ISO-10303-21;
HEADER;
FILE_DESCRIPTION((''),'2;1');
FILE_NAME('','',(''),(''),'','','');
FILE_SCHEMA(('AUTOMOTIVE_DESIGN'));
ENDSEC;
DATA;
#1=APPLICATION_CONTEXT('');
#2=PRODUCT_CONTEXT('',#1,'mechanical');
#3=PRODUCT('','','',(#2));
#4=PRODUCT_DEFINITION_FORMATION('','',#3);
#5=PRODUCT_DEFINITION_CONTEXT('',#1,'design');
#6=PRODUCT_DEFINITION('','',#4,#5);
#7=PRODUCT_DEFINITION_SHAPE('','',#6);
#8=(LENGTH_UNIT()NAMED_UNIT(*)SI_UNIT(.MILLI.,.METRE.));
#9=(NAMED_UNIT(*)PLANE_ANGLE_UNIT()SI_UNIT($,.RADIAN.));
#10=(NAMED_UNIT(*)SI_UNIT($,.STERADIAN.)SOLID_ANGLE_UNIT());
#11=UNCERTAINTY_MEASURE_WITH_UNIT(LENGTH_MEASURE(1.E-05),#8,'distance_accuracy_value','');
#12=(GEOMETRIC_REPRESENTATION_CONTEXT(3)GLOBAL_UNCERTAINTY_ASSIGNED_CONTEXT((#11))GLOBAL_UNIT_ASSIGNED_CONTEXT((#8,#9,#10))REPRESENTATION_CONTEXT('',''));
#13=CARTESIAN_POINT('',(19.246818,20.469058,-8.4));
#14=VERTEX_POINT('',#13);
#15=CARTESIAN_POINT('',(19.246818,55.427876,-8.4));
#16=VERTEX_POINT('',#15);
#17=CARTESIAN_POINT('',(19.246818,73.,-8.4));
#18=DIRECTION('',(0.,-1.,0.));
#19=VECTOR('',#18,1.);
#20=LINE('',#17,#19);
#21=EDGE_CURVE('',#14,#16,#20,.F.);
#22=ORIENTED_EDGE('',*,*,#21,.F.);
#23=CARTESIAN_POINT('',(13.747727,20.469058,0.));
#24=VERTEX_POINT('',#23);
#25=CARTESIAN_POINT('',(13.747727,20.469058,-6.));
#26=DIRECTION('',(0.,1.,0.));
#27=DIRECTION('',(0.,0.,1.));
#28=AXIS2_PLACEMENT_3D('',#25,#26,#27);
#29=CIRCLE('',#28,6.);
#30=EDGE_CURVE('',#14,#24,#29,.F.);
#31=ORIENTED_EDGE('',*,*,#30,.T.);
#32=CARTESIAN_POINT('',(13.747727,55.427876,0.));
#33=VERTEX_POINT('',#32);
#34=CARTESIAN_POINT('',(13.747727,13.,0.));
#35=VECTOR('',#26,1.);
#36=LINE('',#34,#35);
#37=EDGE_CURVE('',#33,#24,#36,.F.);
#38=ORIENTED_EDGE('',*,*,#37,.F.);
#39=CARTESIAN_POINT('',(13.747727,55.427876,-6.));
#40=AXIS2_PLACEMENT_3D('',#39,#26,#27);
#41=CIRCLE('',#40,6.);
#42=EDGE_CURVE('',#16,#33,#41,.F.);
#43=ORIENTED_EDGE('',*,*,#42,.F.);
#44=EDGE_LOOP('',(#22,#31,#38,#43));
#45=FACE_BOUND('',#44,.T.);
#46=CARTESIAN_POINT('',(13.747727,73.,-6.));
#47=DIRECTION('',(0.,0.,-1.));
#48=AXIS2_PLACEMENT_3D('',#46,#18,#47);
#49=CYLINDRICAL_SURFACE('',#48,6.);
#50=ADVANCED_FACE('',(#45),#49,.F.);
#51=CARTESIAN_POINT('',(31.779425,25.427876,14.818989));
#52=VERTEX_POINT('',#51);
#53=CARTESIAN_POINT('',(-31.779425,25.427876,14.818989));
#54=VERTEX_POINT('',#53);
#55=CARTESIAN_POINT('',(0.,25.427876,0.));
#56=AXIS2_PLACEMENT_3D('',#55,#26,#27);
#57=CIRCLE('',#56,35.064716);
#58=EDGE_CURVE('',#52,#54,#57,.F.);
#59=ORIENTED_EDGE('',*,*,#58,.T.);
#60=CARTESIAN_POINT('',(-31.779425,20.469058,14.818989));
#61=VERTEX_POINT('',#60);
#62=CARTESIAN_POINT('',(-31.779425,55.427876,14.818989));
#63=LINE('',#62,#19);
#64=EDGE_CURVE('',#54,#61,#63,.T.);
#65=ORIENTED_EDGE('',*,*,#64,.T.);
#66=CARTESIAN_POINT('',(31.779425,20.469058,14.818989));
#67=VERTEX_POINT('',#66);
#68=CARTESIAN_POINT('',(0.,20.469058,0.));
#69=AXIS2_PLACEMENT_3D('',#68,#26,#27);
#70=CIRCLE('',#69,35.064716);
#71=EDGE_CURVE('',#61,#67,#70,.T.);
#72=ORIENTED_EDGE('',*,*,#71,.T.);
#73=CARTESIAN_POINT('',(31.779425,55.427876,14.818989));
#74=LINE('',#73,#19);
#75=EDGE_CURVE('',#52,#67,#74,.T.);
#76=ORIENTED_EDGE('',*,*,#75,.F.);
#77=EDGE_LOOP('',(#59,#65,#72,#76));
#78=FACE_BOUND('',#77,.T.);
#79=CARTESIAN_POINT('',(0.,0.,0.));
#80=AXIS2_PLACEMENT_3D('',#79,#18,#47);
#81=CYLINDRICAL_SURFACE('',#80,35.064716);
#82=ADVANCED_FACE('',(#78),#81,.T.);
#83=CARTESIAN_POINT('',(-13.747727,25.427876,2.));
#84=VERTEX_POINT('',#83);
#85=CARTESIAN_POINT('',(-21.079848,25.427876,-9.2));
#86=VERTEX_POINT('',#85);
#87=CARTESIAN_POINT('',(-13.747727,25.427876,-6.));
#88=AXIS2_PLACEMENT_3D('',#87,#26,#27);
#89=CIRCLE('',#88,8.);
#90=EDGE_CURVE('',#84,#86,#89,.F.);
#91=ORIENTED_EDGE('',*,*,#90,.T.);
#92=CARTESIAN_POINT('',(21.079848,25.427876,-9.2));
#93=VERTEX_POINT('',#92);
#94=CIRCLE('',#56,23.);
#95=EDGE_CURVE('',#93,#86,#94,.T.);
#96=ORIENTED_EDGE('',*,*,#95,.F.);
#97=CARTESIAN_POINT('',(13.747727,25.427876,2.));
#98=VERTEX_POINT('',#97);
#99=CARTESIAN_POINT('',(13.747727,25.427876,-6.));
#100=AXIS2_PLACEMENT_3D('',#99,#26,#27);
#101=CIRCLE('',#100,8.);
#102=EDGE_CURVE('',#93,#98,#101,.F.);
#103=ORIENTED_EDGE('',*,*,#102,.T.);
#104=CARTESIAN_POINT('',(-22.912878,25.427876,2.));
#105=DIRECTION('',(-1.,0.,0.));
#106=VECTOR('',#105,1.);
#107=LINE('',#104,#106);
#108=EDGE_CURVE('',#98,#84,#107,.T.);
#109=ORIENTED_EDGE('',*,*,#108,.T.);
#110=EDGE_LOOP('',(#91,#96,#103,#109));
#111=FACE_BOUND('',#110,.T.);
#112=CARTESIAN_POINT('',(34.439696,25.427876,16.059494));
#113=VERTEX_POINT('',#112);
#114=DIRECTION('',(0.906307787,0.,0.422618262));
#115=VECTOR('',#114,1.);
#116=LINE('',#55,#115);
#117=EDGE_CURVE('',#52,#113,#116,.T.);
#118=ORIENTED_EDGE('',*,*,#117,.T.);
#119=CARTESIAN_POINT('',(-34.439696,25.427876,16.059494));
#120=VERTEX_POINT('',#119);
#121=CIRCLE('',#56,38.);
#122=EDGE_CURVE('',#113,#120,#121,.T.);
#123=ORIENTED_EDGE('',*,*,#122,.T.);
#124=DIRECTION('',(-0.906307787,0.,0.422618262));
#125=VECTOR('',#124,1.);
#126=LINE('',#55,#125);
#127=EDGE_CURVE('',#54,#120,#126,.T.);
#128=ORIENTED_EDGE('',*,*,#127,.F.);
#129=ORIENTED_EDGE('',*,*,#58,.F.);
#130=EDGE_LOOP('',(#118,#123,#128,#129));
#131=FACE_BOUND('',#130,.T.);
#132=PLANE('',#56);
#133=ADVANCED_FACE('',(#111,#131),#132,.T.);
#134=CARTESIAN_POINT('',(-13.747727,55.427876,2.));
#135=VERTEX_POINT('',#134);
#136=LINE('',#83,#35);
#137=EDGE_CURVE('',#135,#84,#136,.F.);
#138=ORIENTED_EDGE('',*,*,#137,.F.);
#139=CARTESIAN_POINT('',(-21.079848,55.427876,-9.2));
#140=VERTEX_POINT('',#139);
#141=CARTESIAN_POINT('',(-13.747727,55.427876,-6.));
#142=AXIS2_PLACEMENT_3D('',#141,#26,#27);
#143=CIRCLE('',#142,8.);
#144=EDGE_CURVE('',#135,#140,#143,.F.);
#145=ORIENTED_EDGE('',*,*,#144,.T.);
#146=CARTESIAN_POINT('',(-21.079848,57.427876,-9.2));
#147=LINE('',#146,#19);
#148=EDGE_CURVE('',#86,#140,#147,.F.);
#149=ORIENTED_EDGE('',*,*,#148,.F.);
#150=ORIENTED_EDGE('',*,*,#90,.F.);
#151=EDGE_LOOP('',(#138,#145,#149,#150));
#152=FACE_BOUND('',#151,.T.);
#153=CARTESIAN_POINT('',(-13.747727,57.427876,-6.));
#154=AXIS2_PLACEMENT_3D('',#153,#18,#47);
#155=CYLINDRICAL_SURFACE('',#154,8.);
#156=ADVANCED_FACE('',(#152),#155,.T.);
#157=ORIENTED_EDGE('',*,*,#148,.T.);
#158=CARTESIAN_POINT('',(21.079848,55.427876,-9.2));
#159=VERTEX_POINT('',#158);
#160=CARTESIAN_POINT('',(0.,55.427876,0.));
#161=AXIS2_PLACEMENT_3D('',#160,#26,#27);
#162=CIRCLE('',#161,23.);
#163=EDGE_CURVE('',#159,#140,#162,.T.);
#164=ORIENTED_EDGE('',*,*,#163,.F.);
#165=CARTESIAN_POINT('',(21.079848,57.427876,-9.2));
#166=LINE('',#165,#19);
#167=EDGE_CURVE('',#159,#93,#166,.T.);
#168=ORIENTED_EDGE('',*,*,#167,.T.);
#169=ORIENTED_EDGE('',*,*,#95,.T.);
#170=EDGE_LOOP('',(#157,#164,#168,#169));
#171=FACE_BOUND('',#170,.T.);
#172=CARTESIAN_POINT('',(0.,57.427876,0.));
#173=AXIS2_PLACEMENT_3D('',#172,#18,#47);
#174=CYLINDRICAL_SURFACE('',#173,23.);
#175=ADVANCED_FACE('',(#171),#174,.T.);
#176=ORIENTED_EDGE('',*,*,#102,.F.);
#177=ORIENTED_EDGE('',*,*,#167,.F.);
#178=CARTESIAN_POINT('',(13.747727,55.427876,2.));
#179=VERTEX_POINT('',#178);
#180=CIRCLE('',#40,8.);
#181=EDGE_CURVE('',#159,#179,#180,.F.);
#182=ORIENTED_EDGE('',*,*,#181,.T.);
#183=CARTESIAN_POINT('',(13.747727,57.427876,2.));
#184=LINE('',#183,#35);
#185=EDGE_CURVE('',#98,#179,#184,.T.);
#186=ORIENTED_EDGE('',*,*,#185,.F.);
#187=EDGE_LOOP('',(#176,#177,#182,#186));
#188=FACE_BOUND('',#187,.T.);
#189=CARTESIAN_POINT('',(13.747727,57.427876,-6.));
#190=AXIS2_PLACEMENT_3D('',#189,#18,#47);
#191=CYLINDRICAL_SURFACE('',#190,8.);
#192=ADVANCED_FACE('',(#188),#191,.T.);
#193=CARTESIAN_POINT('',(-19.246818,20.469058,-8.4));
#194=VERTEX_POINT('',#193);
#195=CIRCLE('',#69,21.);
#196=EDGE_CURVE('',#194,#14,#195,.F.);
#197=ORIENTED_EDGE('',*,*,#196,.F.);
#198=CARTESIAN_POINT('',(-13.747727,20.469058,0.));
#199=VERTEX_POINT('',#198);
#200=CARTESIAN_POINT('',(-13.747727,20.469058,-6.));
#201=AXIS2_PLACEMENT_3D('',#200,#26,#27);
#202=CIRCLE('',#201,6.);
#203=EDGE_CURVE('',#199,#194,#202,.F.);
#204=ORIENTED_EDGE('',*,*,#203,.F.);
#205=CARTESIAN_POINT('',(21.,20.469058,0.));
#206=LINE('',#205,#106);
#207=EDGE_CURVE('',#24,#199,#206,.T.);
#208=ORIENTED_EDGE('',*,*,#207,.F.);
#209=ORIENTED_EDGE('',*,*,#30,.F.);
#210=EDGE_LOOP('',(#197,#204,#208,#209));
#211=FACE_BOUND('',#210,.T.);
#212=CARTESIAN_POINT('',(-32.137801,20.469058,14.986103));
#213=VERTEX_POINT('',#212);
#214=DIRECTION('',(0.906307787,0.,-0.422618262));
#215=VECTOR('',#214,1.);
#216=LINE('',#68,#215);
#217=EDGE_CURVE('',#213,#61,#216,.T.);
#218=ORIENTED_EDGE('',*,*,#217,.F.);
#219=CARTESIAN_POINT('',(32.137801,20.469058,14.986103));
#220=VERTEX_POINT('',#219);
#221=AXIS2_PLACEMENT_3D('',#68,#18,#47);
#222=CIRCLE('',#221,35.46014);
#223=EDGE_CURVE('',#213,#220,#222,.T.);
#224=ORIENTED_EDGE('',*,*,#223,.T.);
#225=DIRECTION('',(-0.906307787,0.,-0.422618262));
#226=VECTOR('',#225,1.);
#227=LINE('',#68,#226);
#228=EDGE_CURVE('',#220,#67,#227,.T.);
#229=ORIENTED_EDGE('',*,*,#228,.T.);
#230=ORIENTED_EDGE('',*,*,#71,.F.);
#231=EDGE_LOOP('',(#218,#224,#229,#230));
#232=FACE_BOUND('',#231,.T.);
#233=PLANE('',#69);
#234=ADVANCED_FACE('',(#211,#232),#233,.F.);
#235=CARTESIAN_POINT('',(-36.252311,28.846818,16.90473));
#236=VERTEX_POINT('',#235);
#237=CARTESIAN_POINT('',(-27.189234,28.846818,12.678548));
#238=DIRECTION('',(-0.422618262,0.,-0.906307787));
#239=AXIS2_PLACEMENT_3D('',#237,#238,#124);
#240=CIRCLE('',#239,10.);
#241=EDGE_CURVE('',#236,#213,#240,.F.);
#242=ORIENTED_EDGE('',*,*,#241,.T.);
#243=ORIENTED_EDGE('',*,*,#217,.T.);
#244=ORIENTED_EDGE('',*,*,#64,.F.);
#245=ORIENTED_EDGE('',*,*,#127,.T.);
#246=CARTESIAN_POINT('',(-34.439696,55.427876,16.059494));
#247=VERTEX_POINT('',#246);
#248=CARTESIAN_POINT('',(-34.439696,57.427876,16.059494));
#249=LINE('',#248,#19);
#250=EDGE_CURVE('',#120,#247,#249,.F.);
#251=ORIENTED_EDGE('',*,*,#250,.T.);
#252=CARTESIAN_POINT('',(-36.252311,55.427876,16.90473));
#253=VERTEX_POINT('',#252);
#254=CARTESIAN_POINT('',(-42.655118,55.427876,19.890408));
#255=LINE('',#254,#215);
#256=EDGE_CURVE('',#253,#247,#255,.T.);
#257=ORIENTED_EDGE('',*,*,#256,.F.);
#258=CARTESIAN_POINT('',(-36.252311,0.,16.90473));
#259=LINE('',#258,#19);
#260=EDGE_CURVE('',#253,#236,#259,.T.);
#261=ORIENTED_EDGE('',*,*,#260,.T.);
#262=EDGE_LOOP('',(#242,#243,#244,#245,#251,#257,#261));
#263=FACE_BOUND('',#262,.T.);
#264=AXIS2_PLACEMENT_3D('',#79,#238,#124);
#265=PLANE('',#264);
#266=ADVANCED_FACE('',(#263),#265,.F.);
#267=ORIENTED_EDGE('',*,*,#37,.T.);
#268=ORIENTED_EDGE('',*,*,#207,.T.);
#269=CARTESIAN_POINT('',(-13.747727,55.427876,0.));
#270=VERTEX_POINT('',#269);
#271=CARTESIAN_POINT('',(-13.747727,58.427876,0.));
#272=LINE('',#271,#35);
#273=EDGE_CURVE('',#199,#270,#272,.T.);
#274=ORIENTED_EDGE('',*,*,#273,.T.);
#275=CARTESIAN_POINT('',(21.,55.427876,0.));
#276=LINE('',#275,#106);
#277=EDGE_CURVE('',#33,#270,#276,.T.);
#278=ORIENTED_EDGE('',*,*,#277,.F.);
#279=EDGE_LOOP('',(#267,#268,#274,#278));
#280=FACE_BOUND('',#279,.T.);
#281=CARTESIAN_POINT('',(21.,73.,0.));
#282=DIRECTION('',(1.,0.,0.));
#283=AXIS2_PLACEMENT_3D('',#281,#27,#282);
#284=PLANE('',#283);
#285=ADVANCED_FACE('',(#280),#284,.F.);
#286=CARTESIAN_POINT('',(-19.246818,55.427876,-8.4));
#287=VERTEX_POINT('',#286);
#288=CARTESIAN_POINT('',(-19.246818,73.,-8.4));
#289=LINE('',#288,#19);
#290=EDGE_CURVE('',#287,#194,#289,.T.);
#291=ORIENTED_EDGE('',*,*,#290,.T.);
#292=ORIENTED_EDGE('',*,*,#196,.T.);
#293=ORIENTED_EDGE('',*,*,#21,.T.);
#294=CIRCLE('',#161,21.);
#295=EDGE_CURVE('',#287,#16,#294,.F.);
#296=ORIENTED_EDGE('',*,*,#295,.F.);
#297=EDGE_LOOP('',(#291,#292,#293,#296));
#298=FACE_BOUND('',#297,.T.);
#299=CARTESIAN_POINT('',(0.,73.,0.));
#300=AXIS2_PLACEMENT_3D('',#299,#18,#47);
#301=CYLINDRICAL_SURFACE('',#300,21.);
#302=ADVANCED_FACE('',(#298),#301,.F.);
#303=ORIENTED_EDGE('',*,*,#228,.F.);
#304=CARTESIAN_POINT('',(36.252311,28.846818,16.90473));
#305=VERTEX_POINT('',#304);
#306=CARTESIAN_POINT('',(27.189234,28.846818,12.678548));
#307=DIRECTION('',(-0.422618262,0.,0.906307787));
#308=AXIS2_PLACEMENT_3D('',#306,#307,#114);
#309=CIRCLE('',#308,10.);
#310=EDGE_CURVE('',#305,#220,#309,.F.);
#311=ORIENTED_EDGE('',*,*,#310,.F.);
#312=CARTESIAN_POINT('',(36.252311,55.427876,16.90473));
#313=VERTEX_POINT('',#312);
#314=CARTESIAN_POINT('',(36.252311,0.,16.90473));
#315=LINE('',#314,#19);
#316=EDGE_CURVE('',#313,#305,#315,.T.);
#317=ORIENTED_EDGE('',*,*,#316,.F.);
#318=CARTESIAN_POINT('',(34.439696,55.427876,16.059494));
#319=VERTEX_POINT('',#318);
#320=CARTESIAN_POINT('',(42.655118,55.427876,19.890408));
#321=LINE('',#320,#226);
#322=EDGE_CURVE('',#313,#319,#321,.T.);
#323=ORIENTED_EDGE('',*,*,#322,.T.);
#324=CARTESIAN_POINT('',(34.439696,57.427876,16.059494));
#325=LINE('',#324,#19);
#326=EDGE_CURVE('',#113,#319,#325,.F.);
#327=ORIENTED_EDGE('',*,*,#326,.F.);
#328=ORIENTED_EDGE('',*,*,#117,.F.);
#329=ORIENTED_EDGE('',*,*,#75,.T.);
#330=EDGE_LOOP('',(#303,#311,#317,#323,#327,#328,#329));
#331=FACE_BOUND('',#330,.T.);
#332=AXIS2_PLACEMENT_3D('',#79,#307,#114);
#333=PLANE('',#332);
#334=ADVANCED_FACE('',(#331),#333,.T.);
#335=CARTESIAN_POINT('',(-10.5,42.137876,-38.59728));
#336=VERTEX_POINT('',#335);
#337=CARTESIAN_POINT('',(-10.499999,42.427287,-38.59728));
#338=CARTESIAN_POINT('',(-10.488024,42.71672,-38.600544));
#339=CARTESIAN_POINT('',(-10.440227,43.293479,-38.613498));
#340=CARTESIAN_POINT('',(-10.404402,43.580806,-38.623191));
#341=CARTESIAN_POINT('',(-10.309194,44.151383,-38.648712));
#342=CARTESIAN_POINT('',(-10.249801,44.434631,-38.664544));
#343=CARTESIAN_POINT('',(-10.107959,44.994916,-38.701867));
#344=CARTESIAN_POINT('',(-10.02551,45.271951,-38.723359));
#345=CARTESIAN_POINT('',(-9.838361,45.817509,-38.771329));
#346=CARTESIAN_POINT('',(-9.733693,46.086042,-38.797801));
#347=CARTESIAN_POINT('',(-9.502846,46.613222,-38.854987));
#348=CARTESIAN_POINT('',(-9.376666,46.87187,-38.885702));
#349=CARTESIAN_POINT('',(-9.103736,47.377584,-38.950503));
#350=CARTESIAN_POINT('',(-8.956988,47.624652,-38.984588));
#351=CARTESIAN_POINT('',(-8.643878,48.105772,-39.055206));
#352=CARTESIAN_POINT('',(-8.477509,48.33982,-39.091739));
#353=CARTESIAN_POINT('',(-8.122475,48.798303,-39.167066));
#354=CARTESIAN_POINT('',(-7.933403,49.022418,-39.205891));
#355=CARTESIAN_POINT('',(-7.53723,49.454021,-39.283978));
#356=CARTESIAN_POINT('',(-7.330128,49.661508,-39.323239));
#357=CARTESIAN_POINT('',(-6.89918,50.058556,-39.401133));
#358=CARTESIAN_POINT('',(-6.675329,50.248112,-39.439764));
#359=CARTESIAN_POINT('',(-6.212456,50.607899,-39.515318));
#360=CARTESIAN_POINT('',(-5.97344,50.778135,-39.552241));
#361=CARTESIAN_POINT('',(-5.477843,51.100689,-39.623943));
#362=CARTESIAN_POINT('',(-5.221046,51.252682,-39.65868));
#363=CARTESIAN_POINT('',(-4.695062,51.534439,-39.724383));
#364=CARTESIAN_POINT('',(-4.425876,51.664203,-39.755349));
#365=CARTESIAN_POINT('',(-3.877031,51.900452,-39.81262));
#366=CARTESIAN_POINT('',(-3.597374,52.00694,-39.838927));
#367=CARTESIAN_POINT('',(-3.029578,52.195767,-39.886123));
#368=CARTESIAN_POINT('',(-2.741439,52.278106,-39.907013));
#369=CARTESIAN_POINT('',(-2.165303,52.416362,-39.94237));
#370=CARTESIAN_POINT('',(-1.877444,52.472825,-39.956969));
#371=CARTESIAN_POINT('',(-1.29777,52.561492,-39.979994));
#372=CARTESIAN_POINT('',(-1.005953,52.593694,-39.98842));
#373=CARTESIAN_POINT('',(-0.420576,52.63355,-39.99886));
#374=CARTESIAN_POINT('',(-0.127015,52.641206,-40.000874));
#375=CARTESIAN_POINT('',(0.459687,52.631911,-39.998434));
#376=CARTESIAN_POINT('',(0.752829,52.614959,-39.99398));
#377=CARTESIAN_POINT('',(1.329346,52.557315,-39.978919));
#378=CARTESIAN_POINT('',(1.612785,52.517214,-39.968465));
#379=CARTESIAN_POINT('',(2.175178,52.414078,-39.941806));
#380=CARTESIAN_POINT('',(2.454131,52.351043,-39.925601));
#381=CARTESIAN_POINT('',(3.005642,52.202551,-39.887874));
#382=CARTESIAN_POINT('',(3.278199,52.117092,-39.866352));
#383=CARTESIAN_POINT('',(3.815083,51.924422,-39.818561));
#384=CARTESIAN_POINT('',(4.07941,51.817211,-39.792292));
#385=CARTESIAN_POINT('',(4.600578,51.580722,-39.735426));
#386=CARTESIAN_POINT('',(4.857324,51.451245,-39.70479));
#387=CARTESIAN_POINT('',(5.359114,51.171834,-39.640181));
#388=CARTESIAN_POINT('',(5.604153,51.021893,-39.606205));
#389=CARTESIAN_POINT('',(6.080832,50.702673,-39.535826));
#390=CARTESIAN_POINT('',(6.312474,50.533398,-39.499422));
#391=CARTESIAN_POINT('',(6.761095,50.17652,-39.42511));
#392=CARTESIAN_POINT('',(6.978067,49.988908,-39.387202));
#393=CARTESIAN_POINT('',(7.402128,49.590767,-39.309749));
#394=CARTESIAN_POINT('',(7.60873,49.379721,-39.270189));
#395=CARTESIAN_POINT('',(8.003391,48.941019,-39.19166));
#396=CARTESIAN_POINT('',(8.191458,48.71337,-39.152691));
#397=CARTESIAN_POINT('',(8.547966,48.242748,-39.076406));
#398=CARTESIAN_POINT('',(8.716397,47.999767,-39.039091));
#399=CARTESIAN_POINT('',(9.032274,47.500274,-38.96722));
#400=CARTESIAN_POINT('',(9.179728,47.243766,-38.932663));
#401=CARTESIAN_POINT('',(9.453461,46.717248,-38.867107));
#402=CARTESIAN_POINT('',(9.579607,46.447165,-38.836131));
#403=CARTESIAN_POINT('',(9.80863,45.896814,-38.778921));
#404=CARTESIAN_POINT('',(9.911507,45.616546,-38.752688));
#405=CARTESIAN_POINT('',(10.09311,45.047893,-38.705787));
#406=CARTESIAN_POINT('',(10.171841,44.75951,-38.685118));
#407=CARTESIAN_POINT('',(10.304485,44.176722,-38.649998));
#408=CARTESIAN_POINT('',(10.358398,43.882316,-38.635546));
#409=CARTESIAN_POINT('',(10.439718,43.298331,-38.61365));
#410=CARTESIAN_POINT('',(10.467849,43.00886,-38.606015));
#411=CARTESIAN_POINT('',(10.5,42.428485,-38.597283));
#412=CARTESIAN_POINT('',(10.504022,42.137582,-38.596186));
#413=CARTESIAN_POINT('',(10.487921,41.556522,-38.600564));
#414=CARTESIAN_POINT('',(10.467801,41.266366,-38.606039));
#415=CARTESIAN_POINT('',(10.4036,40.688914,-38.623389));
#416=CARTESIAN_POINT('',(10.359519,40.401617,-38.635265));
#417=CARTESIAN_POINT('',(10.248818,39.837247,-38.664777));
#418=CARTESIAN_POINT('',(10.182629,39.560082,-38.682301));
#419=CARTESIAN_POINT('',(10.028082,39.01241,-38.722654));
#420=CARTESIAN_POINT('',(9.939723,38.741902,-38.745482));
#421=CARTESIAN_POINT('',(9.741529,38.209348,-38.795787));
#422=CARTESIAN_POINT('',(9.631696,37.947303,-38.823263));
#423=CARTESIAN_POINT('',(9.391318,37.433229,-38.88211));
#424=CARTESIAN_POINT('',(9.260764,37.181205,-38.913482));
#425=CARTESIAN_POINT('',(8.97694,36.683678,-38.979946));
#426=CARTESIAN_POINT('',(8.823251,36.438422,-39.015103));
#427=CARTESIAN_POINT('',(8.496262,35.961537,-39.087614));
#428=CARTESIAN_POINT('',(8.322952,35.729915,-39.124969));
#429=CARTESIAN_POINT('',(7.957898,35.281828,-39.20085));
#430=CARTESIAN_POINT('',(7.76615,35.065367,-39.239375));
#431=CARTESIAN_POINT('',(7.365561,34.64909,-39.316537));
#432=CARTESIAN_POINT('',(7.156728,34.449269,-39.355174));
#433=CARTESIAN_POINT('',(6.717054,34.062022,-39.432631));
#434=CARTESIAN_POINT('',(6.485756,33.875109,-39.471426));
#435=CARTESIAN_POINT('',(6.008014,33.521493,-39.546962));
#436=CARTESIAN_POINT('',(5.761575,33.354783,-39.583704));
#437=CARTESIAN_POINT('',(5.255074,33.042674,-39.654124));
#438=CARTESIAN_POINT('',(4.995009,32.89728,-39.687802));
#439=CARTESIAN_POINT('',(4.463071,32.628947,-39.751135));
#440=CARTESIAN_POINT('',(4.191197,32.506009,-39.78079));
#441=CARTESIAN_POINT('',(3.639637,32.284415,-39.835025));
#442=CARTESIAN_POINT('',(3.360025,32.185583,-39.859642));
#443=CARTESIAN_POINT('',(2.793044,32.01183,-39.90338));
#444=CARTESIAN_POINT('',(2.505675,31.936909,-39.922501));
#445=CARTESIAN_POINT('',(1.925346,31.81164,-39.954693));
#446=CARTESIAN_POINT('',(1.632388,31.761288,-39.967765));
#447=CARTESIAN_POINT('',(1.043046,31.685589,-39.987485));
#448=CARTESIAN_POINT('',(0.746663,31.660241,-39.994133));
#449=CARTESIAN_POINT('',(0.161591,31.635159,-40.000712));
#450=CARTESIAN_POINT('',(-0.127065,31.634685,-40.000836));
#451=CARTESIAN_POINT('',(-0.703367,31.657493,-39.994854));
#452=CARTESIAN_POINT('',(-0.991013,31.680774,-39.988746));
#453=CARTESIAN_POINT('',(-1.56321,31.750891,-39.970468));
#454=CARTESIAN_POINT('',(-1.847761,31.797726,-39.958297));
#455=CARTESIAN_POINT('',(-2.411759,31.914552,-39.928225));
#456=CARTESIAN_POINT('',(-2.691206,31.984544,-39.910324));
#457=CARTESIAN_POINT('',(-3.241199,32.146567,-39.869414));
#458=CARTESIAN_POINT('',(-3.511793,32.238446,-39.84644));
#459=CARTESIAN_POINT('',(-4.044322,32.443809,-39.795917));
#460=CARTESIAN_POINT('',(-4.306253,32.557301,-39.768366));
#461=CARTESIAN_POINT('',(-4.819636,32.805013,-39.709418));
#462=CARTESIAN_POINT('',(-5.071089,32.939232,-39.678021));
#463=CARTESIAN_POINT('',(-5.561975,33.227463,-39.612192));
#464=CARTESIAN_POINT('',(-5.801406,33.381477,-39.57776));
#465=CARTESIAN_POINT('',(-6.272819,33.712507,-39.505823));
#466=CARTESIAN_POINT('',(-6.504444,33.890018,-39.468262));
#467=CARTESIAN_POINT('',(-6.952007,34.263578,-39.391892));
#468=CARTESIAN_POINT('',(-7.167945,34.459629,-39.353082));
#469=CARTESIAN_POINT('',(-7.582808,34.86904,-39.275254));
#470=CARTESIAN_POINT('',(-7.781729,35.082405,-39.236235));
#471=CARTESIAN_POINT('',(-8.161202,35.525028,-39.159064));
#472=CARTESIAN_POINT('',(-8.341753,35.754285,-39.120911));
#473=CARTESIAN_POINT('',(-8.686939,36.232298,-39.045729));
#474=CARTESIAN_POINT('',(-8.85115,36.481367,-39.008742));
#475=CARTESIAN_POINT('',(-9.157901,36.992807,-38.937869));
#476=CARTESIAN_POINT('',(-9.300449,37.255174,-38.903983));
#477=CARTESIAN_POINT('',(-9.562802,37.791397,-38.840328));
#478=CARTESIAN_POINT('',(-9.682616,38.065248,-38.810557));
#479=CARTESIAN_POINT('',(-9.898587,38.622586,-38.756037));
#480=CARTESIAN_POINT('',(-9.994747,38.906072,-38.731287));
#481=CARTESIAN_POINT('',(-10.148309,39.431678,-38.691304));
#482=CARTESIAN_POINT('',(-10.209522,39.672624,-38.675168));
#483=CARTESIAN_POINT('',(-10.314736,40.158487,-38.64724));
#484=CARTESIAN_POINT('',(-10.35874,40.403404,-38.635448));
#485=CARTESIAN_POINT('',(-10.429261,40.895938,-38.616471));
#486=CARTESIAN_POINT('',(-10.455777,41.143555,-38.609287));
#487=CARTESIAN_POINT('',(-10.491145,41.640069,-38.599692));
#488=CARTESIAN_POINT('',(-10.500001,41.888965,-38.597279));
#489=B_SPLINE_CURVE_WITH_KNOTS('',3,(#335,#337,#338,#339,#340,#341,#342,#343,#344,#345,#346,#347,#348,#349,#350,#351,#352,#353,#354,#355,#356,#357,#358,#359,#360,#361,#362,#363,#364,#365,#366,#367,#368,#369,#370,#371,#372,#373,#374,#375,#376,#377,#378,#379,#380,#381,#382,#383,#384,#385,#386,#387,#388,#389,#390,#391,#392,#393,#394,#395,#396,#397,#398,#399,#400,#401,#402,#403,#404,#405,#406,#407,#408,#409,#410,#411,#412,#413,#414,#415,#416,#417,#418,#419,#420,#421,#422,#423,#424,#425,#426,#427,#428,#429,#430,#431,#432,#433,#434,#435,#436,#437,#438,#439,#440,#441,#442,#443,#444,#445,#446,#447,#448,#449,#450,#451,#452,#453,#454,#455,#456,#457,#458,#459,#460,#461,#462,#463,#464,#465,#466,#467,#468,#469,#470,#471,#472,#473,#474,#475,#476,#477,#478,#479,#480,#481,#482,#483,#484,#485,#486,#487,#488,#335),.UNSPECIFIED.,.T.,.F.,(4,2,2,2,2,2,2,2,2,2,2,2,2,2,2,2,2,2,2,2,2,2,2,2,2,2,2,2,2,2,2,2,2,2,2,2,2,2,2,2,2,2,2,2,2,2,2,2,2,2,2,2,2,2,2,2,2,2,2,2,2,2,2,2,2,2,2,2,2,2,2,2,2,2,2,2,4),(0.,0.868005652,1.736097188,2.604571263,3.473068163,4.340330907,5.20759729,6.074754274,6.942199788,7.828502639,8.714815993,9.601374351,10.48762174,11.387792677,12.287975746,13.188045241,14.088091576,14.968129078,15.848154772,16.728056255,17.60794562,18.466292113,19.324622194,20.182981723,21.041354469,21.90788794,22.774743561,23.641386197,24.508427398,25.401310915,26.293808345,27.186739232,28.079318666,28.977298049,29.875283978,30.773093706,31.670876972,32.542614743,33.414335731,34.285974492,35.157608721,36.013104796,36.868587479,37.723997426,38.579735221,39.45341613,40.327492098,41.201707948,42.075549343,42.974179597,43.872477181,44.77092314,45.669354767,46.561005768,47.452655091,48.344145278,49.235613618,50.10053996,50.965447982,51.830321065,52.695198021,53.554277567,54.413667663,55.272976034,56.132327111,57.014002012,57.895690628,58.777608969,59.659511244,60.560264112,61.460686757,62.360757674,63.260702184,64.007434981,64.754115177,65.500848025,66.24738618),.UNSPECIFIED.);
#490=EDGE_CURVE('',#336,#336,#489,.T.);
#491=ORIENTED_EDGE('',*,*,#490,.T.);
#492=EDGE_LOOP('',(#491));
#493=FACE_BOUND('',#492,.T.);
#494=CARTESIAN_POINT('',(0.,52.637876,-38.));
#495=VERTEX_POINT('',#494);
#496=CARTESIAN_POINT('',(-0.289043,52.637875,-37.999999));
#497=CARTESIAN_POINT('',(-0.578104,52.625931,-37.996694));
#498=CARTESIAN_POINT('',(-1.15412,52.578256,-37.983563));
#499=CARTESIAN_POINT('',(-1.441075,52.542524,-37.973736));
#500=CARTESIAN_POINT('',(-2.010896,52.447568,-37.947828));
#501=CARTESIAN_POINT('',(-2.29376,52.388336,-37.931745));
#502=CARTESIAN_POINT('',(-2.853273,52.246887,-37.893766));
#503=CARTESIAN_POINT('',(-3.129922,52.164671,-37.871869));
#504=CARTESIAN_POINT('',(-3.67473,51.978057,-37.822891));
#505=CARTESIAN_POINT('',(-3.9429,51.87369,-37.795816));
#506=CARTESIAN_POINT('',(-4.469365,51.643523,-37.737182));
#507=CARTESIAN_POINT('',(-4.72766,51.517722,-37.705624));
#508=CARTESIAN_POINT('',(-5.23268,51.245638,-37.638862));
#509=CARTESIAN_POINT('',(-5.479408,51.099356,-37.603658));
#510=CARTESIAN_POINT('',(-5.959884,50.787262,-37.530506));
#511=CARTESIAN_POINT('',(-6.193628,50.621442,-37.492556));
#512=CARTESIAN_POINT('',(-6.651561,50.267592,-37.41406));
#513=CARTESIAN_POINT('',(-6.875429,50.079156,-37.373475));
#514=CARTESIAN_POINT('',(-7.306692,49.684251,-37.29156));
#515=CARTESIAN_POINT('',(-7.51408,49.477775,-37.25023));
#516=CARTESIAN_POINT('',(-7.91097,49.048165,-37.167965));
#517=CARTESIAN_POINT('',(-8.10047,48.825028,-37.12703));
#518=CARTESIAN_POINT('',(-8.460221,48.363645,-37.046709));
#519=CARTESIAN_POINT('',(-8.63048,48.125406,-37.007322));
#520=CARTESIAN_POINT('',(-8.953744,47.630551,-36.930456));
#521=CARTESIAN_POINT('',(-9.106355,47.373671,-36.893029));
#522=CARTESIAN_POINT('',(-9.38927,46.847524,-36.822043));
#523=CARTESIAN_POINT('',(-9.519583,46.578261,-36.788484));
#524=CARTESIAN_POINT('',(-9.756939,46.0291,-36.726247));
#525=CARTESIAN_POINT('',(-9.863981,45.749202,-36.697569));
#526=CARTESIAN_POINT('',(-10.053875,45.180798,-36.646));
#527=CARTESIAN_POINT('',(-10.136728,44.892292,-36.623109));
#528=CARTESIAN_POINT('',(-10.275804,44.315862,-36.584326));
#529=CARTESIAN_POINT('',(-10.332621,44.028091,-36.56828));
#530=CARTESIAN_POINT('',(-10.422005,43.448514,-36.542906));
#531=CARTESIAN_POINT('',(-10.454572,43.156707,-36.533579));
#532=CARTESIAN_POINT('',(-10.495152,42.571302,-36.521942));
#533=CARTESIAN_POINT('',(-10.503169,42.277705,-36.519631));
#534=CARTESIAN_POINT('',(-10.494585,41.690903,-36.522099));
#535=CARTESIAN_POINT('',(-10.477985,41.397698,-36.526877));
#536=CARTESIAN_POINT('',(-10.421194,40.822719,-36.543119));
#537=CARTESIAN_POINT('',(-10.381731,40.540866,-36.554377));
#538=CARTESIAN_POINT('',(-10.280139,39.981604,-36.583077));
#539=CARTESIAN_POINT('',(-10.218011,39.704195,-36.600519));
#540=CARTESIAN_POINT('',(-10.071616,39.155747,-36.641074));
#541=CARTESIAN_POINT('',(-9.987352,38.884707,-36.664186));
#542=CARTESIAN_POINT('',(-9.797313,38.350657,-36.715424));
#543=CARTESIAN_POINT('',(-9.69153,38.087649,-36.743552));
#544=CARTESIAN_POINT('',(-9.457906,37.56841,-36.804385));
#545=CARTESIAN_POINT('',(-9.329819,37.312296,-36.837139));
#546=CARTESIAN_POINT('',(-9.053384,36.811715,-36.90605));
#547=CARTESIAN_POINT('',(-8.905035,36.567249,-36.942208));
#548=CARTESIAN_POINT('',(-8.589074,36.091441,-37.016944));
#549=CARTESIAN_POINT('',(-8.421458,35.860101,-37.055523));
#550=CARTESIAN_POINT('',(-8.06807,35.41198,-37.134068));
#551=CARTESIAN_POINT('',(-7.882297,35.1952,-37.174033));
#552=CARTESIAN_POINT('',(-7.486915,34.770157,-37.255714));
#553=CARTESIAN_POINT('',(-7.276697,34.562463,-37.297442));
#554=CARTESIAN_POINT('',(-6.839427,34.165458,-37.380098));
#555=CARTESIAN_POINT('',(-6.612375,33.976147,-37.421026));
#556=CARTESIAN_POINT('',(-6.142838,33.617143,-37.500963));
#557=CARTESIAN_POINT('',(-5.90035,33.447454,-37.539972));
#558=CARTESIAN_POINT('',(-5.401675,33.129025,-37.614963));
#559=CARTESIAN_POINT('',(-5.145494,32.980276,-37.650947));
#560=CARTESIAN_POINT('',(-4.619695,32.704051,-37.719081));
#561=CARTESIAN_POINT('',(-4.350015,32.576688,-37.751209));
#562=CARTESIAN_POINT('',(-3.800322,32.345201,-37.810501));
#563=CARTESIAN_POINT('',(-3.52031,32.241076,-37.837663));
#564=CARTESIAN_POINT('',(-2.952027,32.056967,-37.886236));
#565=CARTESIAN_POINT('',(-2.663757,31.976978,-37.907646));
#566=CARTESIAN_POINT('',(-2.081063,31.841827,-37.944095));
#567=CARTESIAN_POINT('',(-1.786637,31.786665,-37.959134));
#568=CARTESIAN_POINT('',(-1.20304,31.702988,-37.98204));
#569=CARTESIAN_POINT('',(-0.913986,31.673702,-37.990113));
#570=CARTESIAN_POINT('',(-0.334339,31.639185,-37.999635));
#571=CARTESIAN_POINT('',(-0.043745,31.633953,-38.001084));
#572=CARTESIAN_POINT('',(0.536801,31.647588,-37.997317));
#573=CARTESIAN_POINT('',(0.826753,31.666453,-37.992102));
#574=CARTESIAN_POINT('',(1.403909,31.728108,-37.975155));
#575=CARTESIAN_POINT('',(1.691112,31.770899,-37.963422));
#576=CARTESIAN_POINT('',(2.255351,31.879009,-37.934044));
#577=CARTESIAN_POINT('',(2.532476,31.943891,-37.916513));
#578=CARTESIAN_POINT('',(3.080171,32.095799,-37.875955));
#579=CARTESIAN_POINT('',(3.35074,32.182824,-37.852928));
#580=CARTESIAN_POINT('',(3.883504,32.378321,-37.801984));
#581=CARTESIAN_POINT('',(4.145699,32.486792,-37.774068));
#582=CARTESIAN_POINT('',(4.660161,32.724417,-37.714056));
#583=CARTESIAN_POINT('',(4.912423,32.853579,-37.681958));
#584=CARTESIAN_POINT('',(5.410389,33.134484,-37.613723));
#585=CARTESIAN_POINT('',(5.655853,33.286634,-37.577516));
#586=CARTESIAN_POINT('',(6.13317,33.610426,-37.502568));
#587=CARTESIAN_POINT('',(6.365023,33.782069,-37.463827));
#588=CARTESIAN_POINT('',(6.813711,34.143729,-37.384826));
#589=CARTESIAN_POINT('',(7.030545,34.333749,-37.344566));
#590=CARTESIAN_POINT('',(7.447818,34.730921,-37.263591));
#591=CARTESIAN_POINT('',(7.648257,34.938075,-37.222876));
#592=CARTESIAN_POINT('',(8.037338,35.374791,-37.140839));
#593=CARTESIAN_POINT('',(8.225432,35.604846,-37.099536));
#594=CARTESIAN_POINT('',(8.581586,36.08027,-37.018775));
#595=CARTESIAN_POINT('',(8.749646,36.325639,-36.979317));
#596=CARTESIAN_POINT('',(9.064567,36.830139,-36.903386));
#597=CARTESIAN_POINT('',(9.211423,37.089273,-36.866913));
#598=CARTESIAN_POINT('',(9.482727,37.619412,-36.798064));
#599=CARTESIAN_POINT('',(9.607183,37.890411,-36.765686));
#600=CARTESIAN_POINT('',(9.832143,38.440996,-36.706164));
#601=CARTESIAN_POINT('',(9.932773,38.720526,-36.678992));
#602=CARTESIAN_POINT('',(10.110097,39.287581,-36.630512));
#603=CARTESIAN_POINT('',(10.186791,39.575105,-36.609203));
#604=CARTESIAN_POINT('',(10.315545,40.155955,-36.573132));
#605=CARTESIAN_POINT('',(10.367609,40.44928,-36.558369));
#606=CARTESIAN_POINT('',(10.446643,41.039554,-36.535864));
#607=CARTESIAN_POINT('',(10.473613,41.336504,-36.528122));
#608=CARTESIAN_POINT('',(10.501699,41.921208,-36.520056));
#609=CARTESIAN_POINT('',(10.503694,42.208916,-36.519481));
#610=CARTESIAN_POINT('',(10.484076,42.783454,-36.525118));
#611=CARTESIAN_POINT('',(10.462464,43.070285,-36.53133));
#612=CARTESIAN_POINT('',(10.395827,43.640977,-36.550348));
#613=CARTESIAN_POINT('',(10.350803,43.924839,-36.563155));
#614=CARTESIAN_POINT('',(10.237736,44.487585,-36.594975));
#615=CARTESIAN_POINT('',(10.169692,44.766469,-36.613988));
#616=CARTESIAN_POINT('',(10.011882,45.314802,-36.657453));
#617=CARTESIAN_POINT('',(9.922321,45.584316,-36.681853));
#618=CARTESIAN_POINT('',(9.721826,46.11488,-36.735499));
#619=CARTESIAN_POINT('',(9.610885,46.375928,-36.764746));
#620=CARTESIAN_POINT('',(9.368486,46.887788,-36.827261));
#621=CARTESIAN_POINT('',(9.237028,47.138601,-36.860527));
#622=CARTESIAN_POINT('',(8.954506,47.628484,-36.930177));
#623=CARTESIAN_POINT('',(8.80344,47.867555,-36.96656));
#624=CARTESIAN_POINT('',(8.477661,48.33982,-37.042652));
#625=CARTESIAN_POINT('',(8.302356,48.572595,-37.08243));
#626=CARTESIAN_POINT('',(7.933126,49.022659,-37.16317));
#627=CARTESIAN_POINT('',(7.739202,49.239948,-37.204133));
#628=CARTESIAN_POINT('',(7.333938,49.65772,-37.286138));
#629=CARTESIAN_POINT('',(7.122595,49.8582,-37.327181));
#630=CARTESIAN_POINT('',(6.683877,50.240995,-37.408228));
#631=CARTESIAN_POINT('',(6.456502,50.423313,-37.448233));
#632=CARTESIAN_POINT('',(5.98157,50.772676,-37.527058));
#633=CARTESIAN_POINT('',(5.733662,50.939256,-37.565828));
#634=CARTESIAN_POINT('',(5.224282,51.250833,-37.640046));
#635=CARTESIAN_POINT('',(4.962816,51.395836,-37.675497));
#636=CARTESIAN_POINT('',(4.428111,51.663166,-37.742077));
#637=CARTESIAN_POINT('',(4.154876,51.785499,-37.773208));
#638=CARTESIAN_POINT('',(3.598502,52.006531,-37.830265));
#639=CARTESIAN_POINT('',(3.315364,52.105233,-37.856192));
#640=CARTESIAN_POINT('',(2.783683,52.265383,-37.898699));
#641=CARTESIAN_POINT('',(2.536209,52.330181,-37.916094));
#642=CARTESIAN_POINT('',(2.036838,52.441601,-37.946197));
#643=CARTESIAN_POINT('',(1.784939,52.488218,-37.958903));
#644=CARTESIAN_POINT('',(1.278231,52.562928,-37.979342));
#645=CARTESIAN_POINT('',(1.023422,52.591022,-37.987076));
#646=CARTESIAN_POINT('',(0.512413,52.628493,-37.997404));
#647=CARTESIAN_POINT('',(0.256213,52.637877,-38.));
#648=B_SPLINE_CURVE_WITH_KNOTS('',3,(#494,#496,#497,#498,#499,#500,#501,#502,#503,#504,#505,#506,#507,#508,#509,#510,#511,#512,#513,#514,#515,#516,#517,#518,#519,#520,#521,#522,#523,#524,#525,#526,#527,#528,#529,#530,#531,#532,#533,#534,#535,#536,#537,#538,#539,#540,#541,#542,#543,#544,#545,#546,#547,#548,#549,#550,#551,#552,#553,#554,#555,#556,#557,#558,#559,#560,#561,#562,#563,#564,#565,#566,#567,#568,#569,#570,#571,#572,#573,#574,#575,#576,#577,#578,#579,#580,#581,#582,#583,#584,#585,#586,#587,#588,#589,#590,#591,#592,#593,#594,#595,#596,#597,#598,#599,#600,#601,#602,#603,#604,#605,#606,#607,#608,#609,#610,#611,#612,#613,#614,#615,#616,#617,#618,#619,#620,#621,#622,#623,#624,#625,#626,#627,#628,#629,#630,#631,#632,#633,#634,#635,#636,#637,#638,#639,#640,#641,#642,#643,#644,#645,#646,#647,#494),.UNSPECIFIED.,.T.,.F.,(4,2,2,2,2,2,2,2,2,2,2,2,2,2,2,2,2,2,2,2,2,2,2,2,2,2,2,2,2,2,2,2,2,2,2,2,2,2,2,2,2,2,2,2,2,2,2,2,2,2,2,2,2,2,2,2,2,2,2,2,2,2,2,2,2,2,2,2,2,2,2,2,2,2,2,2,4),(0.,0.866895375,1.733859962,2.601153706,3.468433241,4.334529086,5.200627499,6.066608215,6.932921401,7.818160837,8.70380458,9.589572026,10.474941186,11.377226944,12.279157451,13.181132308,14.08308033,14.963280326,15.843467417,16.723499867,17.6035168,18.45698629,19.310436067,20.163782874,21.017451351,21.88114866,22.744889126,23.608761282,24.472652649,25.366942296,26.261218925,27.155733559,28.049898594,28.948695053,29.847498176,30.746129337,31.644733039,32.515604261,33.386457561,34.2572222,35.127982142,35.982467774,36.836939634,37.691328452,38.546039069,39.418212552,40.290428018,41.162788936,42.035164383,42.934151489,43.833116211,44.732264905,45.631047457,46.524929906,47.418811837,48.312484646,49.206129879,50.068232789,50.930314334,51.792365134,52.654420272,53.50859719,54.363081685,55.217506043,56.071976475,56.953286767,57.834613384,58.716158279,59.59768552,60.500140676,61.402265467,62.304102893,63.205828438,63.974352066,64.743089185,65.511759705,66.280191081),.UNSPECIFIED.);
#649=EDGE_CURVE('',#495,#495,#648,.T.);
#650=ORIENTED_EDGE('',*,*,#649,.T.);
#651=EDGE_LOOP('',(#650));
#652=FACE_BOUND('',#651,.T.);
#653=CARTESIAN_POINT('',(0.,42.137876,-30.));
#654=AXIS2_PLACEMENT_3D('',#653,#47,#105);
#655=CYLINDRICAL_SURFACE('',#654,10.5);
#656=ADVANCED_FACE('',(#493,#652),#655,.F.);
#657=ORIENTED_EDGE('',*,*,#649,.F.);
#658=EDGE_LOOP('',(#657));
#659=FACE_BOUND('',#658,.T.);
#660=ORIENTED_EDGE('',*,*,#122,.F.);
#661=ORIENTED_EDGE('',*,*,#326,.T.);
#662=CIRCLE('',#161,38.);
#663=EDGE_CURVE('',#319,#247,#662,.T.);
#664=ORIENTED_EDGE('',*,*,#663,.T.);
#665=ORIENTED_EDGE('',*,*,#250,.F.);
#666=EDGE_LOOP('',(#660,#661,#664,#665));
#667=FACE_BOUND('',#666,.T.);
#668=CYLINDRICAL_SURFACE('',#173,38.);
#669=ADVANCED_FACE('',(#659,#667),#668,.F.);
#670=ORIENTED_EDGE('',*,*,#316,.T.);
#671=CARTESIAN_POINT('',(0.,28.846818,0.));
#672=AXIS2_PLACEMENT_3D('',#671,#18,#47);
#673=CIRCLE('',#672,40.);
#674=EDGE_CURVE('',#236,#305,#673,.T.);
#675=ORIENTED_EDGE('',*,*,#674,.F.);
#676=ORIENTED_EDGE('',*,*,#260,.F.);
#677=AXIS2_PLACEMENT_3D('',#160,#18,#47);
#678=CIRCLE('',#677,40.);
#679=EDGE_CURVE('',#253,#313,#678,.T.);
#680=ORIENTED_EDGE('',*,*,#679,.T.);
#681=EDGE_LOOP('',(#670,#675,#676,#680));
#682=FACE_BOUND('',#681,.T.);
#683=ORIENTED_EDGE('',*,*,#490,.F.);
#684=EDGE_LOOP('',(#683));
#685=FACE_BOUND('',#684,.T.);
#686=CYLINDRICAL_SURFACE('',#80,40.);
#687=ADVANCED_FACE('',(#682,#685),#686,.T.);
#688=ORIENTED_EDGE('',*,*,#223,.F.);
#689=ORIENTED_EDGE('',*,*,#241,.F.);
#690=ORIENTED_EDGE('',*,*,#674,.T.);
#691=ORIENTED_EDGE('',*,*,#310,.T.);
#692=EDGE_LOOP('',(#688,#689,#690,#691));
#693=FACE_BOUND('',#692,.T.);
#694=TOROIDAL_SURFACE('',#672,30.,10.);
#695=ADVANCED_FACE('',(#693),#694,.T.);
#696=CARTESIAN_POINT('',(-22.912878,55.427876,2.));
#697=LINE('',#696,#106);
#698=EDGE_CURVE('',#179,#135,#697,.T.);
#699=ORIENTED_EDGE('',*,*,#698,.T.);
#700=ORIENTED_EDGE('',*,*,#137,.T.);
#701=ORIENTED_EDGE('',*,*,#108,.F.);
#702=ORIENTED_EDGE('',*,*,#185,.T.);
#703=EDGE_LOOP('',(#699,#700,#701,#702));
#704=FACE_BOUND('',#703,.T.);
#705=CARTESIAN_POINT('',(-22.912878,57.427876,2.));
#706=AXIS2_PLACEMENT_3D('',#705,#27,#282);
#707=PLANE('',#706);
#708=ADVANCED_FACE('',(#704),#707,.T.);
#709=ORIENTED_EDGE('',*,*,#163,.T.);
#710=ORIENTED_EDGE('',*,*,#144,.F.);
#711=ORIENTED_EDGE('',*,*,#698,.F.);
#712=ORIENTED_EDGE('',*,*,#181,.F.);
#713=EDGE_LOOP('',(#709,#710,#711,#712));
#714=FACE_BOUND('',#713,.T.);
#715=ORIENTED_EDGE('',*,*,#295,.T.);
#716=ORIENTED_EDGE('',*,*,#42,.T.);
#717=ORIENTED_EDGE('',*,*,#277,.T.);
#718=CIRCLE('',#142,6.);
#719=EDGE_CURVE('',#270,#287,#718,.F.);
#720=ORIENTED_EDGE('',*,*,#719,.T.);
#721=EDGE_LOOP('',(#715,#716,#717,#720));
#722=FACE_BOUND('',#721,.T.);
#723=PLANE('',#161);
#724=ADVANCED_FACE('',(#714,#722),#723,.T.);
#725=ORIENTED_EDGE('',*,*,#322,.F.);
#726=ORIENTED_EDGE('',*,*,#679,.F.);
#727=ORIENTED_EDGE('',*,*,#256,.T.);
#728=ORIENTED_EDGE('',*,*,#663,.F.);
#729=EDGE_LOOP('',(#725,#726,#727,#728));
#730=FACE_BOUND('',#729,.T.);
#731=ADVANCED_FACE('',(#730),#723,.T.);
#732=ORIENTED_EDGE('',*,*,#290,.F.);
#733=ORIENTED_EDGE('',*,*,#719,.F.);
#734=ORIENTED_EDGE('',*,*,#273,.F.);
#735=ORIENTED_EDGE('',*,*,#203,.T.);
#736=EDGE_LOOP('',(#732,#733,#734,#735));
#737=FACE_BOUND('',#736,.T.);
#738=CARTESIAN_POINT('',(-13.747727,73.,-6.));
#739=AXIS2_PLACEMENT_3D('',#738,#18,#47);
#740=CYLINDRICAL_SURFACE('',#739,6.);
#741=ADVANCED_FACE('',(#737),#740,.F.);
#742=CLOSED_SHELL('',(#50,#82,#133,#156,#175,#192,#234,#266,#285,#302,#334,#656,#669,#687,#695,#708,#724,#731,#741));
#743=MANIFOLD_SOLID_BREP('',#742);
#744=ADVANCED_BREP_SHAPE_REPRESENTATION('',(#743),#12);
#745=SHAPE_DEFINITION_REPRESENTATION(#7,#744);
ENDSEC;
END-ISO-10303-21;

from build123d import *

# Parameters (mm, degrees)
CUT_EXTRUDE3_DEPTH           = 60
CUT_EXTRUDE5_DEPTH           = 2
CUT_EXTRUDE5_DEPTH_BACK      = 30
SKETCH9_R                    = 38
SKETCH9_R_2                  = 23
SKETCH19_W                   = 12
SKETCH19_H                   = 36.5
CUT_REVOLVE2_ANGLE           = 65
CUT_REVOLVE2_OTHER_WAY_ANGLE = 65
SKETCH21_W                   = 3.25
SKETCH21_H                   = 4
BOSS_EXTRUDE3_DEPTH          = 1.35
CIRPATTERN1_COUNT            = 5
CUT_EXTRUDE9_START           = -5
CUT_EXTRUDE9_DEPTH           = 5
SKETCH23_R                   = 10.5
CUT_EXTRUDE10_DEPTH          = 10
SKETCH24_W                   = 17
SKETCH24_H                   = 12
BOSS_EXTRUDE4_DEPTH          = 8
SKETCH26_W                   = 12
SKETCH26_H                   = 8
CUT_EXTRUDE11_DEPTH          = 10
SKETCH27_W                   = 4
SKETCH27_H                   = 5
CUT_EXTRUDE12_DEPTH          = 5
CUT_EXTRUDE14_DEPTH          = 2
CUT_EXTRUDE14_DEPTH_BACK     = 30
SKETCH29_R                   = 1
CUT_EXTRUDE15_DEPTH          = 15
FILLET1_R                    = 6
FILLET2_R                    = 8
SKETCH30_W                   = 97.703590575
SKETCH30_H                   = 5
CUT_EXTRUDE16_DEPTH          = 5
INTERSECT1_DEPTH             = 20.469057744
INTERSECT1_START             = 55.427876097
INTERSECT1_2_OUTLINE_R       = 40
INTERSECT1_2_OUTLINE_W       = 12
INTERSECT1_2_OUTLINE_H       = 8
INTERSECT1_2_DEPTH           = 8
INTERSECT1_START_2           = 50.427876097
INTERSECT1_3_OUTLINE_W       = 17
INTERSECT1_3_OUTLINE_H       = 12
INTERSECT1_3_OUTLINE_W_2     = 12
INTERSECT1_3_OUTLINE_H_2     = 8
INTERSECT1_3_DEPTH           = 5


with BuildPart() as part:
    # Sketch1 → Revolve1 (revolve)
    with BuildSketch(Plane.XY, mode=Mode.PRIVATE) as revolve1_sk:
        with BuildLine():
            Line((0, 63.427876097), (32, 63.427876097))
            ThreePointArc((32, 63.427876097), (37.656854249, 61.084730346), (40, 55.427876097))
            Line((40, 55.427876097), (40, 28.846818009))
            ThreePointArc((40, 28.846818009), (38.792081772, 24.082439968), (35.460140376, 20.469057744))
            Line((35.460140376, 20.469057744), (28.539859624, 15.958818353))
            ThreePointArc((28.539859624, 15.958818353), (25.207918228, 12.345436129), (24, 7.581058088))
            Line((24, 7.581058088), (24, 3.25))
            Line((24, 3.25), (24.35, 3))
            Line((24.35, 3), (24.35, 0))
            Line((24.35, 0), (22.5, 0))
            Line((22.5, 0), (22.5, 12.5))
            ThreePointArc((22.5, 12.5), (22.353553391, 12.853553391), (22, 13))
            Line((22, 13), (0, 13))
            Line((0, 13), (0, 63.427876097))
        make_face()
    revolve(revolve1_sk.sketch.rotate(Axis((0, 0, 0), (0, 1, 0)), 90), axis=Axis((0, 0, 0), (0, 1, 0)))

    # Sketch11 → Cut-Extrude3 (cut)
    with BuildSketch(Plane(origin=(0, 13, 0), x_dir=(-1, 0, 0), z_dir=(0, -1, 0))):
        with BuildLine():
            Line((-21, 0), (21, 0))
            ThreePointArc((21, 0), (0, 21), (-21, 0))
        make_face()
    extrude(amount=-CUT_EXTRUDE3_DEPTH, mode=Mode.SUBTRACT)

    # Sketch9 → Cut-Extrude5 (cut, two sides: drawn at the far end of the back side and taken through both)
    with BuildSketch(Plane(origin=(0, 55.427876097, 0), x_dir=(1, 0, 0), z_dir=(0, 1, 0)).offset(-CUT_EXTRUDE5_DEPTH_BACK)):
        with Locations(Location((0, 0, 0), (0, 0, 270))):
            Circle(SKETCH9_R)
        with Locations(Location((0, 0, 0), (0, 0, 270))):
            Circle(SKETCH9_R_2, mode=Mode.SUBTRACT)
    extrude(amount=CUT_EXTRUDE5_DEPTH + CUT_EXTRUDE5_DEPTH_BACK, mode=Mode.SUBTRACT)

    # Sketch19 → Cut-Revolve2 (revolve, cut)
    with BuildSketch(Plane(origin=(0, 0, 0), x_dir=(0, 0, -1), z_dir=(1, 0, 0))):
        with Locations((-41.064715832, 37.177876097)):
            Rectangle(SKETCH19_W, SKETCH19_H)
    revolve(axis=Axis((0, 0, 0), (0, 1, 0)), revolution_arc=CUT_REVOLVE2_ANGLE, mode=Mode.SUBTRACT)

    # Sketch19 → Cut-Revolve2 other way (revolve, cut)
    with BuildSketch(Plane(origin=(0, 0, 0), x_dir=(0, 0, -1), z_dir=(1, 0, 0))):
        with Locations((-41.064715832, 37.177876097)):
            Rectangle(SKETCH19_W, SKETCH19_H)
    revolve(axis=Axis((0, 0, 0), (0, -1, 0)), revolution_arc=CUT_REVOLVE2_OTHER_WAY_ANGLE, mode=Mode.SUBTRACT)

    # Sketch21 → Boss-Extrude3 (add)
    with BuildSketch(Plane(origin=(0, 0, 22.5), x_dir=(-1, 0, 0), z_dir=(0, 0, -1))):
        with Locations((0, 2)):
            Rectangle(SKETCH21_W, SKETCH21_H)
    boss_extrude3 = extrude(amount=BOSS_EXTRUDE3_DEPTH)

    # CirPattern1: Boss-Extrude3 ×5 about axis
    cirpattern1_axis = Axis((0, 0, 0), (0, 1, 0))
    for i in range(1, CIRPATTERN1_COUNT):
        add(boss_extrude3.rotate(cirpattern1_axis, i * 360 / CIRPATTERN1_COUNT))

    # Cut-Extrude9: read off the stored shape, not the designer's step
    # Cut-Extrude9 outline → Cut-Extrude9 (cut)
    with BuildSketch(Plane(origin=(0, 63.427876097, 0), x_dir=(1, 0, 0), z_dir=(0, 1, 0)).offset(CUT_EXTRUDE9_START)):
        with BuildLine():
            ThreePointArc((40, 0), (0, 40), (-40, 0))
            Line((-40, 0), (-21, 0))
            ThreePointArc((-21, 0), (0, 21), (21, 0))
            Line((21, 0), (40, 0))
        make_face()
    extrude(amount=CUT_EXTRUDE9_DEPTH, mode=Mode.SUBTRACT)

    # Sketch23 → Cut-Extrude10 (cut)
    with BuildSketch(Plane(origin=(0, 0, -40), x_dir=(-1, 0, 0), z_dir=(0, 0, -1))):
        with Locations((0, 42.137876097)):
            Circle(SKETCH23_R)
    extrude(amount=-CUT_EXTRUDE10_DEPTH, mode=Mode.SUBTRACT)

    # Sketch24 → Boss-Extrude4 (add)
    with BuildSketch(Plane(origin=(0, 58.427876097, 0), x_dir=(1, 0, 0), z_dir=(0, 1, 0))):
        with Locations((0, 30)):
            Rectangle(SKETCH24_W, SKETCH24_H)
    extrude(amount=-BOSS_EXTRUDE4_DEPTH)

    # Sketch26 → Cut-Extrude11 (cut)
    with BuildSketch(Plane(origin=(0, 58.427876097, 0), x_dir=(1, 0, 0), z_dir=(0, 1, 0))):
        with Locations((0, 30)):
            Rectangle(SKETCH26_W, SKETCH26_H)
    extrude(amount=-CUT_EXTRUDE11_DEPTH, mode=Mode.SUBTRACT)

    # Sketch27 → Cut-Extrude12 (cut)
    with BuildSketch(Plane(origin=(8.5, 0, 0), x_dir=(0, 0, -1), z_dir=(1, 0, 0))):
        with Locations((29.5, 53.927876097)):
            Rectangle(SKETCH27_W, SKETCH27_H)
    extrude(amount=-CUT_EXTRUDE12_DEPTH, mode=Mode.SUBTRACT)

    # Sketch28 → Cut-Extrude14 (cut, two sides: drawn at the far end of the back side and taken through both)
    with BuildSketch(Plane(origin=(0, 55.427876097, 0), x_dir=(1, 0, 0), z_dir=(0, 1, 0)).offset(-CUT_EXTRUDE14_DEPTH_BACK)):
        with BuildLine():
            Line((-22.912878475, -2), (22.912878475, -2))
            ThreePointArc((22.912878475, -2), (0, -23), (-22.912878475, -2))
        make_face()
    extrude(amount=CUT_EXTRUDE14_DEPTH + CUT_EXTRUDE14_DEPTH_BACK, mode=Mode.SUBTRACT)

    # Sketch29 → Cut-Extrude15 (cut)
    with BuildSketch(Plane(origin=(0, 0, 0), x_dir=(-1, 0, 0), z_dir=(0, 0, -1))):
        with Locations((-30.416198487, 60.927876097)):
            Circle(SKETCH29_R)
        with Locations((30.416198487, 60.927876097)):
            Circle(SKETCH29_R)
        with Locations((0, 60.927876097)):
            Circle(SKETCH29_R)
    extrude(amount=-CUT_EXTRUDE15_DEPTH, mode=Mode.SUBTRACT)

    # Fillet1
    fillet1_edges = [part.edges().sort_by_distance(p)[0] for p in [
        (21, 35.713938048, 0),
        (-21, 35.713938048, 0),
    ]]
    fillet(fillet1_edges, radius=FILLET1_R)

    # Fillet2
    fillet2_edges = [part.edges().sort_by_distance(p)[0] for p in [
        (-22.912878475, 41.427876097, 2),
        (22.912878475, 41.427876097, 2),
    ]]
    fillet(fillet2_edges, radius=FILLET2_R)

    # Sketch30 → Cut-Extrude16 (cut)
    with BuildSketch(Plane(origin=(0, 63.427876097, 0), x_dir=(1, 0, 0), z_dir=(0, 1, 0))):
        with Locations((-0.528699084, -2.5)):
            Rectangle(SKETCH30_W, SKETCH30_H)
    extrude(amount=-CUT_EXTRUDE16_DEPTH, mode=Mode.SUBTRACT)

    # Intersect1: read off the stored shape, not the designer's step
    # Intersect1 outline → Intersect1 (cut)
    with BuildSketch(Plane(origin=(0, 0, 0), x_dir=(1, 0, 0), z_dir=(0, 1, 0))):
        with BuildLine():
            Line((31.779425009, -14.818989253), (32.137801352, -14.986102887))
            ThreePointArc((32.137801352, -14.986102887), (0, 35.460140376), (-32.137801352, -14.986102887))
            Line((-32.137801352, -14.986102887), (-31.779425009, -14.818989253))
            ThreePointArc((-31.779425009, -14.818989253), (0, -35.064715832), (31.779425009, -14.818989253))
        make_face()
        with BuildLine():
            ThreePointArc((-13.747727085, 0), (-18.767687244, 2.713664655), (-19.246817919, 8.4))
            ThreePointArc((-19.246817919, 8.4), (0, 21), (19.246817919, 8.4))
            ThreePointArc((19.246817919, 8.4), (18.767687244, 2.713664655), (13.747727085, 0))
            Line((13.747727085, 0), (-13.747727085, 0))
        make_face(mode=Mode.SUBTRACT)
    extrude(amount=INTERSECT1_DEPTH, mode=Mode.SUBTRACT)

    # Intersect1 2 outline → Intersect1 2 (cut)
    with BuildSketch(Plane(origin=(0, 0, 0), x_dir=(1, 0, 0), z_dir=(0, 1, 0)).offset(INTERSECT1_START)):
        Circle(INTERSECT1_2_OUTLINE_R)
        with Locations((0, 30)):
            Rectangle(INTERSECT1_2_OUTLINE_W, INTERSECT1_2_OUTLINE_H, mode=Mode.SUBTRACT)
        with BuildLine():
            ThreePointArc((-13.747727085, 0), (-18.767687244, 2.713664655), (-19.246817919, 8.4))
            ThreePointArc((-19.246817919, 8.4), (0, 21), (19.246817919, 8.4))
            ThreePointArc((19.246817919, 8.4), (18.767687244, 2.713664655), (13.747727085, 0))
            Line((13.747727085, 0), (-13.747727085, 0))
        make_face(mode=Mode.SUBTRACT)
    extrude(amount=INTERSECT1_2_DEPTH, mode=Mode.SUBTRACT)

    # Intersect1 3 outline → Intersect1 3 (cut)
    with BuildSketch(Plane(origin=(0, 0, 0), x_dir=(1, 0, 0), z_dir=(0, 1, 0)).offset(INTERSECT1_START_2)):
        with Locations((0, 30)):
            Rectangle(INTERSECT1_3_OUTLINE_W, INTERSECT1_3_OUTLINE_H)
        with Locations((0, 30)):
            Rectangle(INTERSECT1_3_OUTLINE_W_2, INTERSECT1_3_OUTLINE_H_2, mode=Mode.SUBTRACT)
    extrude(amount=INTERSECT1_3_DEPTH, mode=Mode.SUBTRACT)


solid = part.part
